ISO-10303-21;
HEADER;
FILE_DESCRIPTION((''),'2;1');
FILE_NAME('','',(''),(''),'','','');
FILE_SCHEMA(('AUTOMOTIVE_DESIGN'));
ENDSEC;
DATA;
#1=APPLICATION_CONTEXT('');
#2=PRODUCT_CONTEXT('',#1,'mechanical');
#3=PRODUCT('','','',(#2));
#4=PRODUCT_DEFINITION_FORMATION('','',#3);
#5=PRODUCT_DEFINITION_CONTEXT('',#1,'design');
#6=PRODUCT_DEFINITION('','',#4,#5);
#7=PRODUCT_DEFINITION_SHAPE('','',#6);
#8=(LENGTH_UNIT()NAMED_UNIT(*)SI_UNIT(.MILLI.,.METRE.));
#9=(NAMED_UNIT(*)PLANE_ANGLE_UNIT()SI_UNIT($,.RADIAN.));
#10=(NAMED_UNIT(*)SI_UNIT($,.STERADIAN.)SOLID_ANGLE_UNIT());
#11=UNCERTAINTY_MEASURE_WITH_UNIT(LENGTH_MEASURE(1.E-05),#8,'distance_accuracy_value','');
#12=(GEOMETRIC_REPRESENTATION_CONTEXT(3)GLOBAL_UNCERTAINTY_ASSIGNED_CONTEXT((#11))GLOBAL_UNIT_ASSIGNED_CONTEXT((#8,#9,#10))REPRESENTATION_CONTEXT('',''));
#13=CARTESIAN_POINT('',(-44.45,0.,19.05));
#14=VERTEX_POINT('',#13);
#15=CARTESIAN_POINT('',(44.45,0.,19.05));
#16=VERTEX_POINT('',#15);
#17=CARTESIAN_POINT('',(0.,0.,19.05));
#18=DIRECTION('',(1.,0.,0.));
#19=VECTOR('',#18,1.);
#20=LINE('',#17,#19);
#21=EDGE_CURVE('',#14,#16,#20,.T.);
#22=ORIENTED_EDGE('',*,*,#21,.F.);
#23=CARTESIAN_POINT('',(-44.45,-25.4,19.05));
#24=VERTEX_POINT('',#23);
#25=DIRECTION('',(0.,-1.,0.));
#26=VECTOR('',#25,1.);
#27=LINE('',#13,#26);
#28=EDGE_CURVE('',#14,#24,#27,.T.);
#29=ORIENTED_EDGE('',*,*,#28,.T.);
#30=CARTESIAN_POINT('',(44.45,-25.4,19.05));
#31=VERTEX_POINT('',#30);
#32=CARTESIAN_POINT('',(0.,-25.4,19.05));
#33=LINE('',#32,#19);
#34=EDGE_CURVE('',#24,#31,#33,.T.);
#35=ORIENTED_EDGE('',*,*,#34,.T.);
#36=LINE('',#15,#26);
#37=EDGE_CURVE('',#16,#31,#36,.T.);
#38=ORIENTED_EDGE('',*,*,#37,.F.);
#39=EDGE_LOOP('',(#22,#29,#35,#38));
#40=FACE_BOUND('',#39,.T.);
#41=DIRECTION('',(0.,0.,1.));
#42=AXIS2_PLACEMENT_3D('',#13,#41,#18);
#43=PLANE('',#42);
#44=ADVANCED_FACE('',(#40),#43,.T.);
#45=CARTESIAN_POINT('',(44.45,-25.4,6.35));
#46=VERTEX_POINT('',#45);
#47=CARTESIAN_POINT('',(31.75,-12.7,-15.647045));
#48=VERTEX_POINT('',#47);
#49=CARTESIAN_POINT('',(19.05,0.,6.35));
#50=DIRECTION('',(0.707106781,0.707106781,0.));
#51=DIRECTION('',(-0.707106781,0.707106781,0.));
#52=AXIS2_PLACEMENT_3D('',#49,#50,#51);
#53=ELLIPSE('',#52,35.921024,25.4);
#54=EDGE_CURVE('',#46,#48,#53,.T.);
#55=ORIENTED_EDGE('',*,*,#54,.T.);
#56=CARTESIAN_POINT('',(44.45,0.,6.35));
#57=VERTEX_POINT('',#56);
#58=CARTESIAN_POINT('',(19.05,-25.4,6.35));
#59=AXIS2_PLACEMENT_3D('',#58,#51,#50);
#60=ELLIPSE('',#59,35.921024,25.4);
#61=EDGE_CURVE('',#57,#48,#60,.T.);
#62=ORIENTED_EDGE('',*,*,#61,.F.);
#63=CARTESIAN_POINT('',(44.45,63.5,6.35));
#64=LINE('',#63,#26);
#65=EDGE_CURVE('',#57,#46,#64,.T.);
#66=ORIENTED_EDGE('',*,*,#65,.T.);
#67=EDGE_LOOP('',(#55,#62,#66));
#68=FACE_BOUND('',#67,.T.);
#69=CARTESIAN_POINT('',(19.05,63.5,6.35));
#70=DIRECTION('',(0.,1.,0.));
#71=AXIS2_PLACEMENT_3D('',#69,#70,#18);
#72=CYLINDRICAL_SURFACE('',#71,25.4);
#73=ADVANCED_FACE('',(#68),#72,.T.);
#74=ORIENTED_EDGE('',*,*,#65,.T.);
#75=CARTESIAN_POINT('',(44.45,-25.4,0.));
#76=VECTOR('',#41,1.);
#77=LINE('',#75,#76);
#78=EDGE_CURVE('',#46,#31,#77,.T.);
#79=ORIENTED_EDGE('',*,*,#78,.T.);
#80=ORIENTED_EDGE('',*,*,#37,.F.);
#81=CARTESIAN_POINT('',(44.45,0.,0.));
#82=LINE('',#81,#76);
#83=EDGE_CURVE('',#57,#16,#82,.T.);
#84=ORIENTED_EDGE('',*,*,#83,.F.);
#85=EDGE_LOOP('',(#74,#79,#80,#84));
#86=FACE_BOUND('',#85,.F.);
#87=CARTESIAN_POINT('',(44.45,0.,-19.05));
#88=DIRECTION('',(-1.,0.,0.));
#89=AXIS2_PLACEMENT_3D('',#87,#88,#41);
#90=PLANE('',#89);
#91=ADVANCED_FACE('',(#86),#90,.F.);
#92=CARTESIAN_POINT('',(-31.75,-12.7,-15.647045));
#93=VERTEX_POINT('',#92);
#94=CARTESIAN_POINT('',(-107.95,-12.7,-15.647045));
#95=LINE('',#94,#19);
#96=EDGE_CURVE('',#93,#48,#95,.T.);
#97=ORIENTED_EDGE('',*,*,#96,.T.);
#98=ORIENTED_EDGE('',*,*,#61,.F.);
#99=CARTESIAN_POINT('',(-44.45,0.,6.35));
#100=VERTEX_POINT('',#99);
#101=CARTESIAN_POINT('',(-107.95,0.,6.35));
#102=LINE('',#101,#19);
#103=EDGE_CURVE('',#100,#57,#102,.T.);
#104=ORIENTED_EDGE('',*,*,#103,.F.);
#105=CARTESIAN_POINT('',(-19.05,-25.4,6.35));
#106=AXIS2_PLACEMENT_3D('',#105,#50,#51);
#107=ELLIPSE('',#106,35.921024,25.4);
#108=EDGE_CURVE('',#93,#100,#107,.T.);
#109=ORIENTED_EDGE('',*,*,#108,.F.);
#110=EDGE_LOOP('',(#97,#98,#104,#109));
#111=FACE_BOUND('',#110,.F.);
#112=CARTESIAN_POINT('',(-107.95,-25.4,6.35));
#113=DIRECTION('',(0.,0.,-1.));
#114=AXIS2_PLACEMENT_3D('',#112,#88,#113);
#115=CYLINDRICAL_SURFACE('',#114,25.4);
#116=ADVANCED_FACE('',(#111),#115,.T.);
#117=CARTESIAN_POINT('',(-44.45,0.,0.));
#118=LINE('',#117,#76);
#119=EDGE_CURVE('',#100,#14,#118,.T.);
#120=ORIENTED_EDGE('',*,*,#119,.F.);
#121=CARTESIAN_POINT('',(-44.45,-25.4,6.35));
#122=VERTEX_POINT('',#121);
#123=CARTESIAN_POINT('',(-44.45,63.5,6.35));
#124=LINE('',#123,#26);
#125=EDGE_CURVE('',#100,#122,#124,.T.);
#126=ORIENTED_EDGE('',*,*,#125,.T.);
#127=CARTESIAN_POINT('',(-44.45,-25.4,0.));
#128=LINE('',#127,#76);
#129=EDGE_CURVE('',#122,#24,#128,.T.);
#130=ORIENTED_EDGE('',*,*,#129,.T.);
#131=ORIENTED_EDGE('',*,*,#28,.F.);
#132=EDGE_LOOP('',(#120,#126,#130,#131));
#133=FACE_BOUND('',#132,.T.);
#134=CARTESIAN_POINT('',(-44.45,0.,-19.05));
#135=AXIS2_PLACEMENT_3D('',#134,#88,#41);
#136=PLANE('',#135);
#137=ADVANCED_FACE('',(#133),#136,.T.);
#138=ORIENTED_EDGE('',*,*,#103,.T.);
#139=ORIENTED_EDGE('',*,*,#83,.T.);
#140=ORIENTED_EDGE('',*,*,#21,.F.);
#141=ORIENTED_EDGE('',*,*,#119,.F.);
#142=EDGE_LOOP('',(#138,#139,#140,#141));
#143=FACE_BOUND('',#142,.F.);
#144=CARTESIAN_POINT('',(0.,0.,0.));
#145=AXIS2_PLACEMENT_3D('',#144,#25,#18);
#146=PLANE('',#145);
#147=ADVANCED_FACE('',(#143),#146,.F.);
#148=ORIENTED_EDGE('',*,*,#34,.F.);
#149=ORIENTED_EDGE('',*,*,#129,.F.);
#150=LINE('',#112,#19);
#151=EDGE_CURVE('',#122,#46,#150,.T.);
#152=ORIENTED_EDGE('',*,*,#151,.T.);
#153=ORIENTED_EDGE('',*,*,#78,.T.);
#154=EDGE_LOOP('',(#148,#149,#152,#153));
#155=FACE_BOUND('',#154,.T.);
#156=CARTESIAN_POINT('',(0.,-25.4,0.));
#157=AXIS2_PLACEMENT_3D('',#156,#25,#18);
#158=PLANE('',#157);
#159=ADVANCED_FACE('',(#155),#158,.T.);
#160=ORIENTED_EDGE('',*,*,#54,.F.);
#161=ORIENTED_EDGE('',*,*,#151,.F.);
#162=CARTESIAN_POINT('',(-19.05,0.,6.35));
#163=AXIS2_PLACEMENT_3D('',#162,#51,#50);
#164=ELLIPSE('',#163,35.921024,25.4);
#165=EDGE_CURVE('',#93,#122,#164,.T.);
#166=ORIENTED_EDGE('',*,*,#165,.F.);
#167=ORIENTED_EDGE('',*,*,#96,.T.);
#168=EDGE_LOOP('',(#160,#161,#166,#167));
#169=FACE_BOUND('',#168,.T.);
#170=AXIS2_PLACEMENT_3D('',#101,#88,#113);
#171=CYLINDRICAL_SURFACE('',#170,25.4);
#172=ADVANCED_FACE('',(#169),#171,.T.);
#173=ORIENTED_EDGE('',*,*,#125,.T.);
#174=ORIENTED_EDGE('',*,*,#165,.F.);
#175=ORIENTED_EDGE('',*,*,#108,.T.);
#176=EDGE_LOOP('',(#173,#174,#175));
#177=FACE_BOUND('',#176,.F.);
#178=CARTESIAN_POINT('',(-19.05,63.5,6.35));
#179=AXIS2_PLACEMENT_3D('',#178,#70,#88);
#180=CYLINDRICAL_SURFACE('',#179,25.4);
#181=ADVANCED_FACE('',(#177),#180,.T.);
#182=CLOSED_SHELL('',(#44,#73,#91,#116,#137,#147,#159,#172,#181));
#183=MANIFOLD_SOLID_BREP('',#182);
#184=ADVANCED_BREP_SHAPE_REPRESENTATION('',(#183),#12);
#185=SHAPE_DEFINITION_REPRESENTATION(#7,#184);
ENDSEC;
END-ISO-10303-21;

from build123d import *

# Parameters (mm, degrees)
F0_W        = 88.9
F0_H        = 38.1
F1_DEPTH    = 25.4
F2_T1_DEPTH = 152.4
F2_T3_DEPTH = 215.9


# Not quite as in the source:
# - a fillet or chamfer that OpenCascade refuses, or shapes differently, is made with other operations: its cross-section is extruded or revolved along the edge and cut away or added


with BuildPart() as f1:
    # F0 (on Front) → F1 (new body)
    with BuildSketch(Plane.XZ):
        Rectangle(F0_W, F0_H)
    extrude(amount=F1_DEPTH)

    # F2: fillet of radius 25.4 on 4 edges, made by hand

    # F2_s2 → F2_t1 (cut)
    with BuildSketch(Plane.XZ.offset(-63.5)):
        with BuildLine():
            ThreePointArc((44.45, 6.35), (37.0105122421, -11.6105122421), (19.05, -19.05))
            Line((19.05, -19.05), (44.45, -19.05))
            Line((44.45, -19.05), (44.45, 6.35))
        make_face()
        with BuildLine():
            ThreePointArc((-44.45, 6.35), (-37.0105122421, -11.6105122421), (-19.05, -19.05))
            Line((-19.05, -19.05), (-44.45, -19.05))
            Line((-44.45, -19.05), (-44.45, 6.35))
        make_face()
    extrude(amount=F2_T1_DEPTH, mode=Mode.SUBTRACT)

    # F2_s4 → F2_t3 (cut)
    with BuildSketch(Plane.YZ.offset(-107.95)):
        with BuildLine():
            ThreePointArc((0, -19.05), (-17.9605122421, -11.6105122421), (-25.4, 6.35))
            Line((-25.4, 6.35), (-25.4, -19.05))
            Line((-25.4, -19.05), (0, -19.05))
        make_face()
        with BuildLine():
            ThreePointArc((-25.4, -19.05), (-7.4394877579, -11.6105122421), (0, 6.35))
            Line((0, 6.35), (0, -19.05))
            Line((0, -19.05), (-25.4, -19.05))
        make_face()
    extrude(amount=F2_T3_DEPTH, mode=Mode.SUBTRACT)


solid = f1.part
